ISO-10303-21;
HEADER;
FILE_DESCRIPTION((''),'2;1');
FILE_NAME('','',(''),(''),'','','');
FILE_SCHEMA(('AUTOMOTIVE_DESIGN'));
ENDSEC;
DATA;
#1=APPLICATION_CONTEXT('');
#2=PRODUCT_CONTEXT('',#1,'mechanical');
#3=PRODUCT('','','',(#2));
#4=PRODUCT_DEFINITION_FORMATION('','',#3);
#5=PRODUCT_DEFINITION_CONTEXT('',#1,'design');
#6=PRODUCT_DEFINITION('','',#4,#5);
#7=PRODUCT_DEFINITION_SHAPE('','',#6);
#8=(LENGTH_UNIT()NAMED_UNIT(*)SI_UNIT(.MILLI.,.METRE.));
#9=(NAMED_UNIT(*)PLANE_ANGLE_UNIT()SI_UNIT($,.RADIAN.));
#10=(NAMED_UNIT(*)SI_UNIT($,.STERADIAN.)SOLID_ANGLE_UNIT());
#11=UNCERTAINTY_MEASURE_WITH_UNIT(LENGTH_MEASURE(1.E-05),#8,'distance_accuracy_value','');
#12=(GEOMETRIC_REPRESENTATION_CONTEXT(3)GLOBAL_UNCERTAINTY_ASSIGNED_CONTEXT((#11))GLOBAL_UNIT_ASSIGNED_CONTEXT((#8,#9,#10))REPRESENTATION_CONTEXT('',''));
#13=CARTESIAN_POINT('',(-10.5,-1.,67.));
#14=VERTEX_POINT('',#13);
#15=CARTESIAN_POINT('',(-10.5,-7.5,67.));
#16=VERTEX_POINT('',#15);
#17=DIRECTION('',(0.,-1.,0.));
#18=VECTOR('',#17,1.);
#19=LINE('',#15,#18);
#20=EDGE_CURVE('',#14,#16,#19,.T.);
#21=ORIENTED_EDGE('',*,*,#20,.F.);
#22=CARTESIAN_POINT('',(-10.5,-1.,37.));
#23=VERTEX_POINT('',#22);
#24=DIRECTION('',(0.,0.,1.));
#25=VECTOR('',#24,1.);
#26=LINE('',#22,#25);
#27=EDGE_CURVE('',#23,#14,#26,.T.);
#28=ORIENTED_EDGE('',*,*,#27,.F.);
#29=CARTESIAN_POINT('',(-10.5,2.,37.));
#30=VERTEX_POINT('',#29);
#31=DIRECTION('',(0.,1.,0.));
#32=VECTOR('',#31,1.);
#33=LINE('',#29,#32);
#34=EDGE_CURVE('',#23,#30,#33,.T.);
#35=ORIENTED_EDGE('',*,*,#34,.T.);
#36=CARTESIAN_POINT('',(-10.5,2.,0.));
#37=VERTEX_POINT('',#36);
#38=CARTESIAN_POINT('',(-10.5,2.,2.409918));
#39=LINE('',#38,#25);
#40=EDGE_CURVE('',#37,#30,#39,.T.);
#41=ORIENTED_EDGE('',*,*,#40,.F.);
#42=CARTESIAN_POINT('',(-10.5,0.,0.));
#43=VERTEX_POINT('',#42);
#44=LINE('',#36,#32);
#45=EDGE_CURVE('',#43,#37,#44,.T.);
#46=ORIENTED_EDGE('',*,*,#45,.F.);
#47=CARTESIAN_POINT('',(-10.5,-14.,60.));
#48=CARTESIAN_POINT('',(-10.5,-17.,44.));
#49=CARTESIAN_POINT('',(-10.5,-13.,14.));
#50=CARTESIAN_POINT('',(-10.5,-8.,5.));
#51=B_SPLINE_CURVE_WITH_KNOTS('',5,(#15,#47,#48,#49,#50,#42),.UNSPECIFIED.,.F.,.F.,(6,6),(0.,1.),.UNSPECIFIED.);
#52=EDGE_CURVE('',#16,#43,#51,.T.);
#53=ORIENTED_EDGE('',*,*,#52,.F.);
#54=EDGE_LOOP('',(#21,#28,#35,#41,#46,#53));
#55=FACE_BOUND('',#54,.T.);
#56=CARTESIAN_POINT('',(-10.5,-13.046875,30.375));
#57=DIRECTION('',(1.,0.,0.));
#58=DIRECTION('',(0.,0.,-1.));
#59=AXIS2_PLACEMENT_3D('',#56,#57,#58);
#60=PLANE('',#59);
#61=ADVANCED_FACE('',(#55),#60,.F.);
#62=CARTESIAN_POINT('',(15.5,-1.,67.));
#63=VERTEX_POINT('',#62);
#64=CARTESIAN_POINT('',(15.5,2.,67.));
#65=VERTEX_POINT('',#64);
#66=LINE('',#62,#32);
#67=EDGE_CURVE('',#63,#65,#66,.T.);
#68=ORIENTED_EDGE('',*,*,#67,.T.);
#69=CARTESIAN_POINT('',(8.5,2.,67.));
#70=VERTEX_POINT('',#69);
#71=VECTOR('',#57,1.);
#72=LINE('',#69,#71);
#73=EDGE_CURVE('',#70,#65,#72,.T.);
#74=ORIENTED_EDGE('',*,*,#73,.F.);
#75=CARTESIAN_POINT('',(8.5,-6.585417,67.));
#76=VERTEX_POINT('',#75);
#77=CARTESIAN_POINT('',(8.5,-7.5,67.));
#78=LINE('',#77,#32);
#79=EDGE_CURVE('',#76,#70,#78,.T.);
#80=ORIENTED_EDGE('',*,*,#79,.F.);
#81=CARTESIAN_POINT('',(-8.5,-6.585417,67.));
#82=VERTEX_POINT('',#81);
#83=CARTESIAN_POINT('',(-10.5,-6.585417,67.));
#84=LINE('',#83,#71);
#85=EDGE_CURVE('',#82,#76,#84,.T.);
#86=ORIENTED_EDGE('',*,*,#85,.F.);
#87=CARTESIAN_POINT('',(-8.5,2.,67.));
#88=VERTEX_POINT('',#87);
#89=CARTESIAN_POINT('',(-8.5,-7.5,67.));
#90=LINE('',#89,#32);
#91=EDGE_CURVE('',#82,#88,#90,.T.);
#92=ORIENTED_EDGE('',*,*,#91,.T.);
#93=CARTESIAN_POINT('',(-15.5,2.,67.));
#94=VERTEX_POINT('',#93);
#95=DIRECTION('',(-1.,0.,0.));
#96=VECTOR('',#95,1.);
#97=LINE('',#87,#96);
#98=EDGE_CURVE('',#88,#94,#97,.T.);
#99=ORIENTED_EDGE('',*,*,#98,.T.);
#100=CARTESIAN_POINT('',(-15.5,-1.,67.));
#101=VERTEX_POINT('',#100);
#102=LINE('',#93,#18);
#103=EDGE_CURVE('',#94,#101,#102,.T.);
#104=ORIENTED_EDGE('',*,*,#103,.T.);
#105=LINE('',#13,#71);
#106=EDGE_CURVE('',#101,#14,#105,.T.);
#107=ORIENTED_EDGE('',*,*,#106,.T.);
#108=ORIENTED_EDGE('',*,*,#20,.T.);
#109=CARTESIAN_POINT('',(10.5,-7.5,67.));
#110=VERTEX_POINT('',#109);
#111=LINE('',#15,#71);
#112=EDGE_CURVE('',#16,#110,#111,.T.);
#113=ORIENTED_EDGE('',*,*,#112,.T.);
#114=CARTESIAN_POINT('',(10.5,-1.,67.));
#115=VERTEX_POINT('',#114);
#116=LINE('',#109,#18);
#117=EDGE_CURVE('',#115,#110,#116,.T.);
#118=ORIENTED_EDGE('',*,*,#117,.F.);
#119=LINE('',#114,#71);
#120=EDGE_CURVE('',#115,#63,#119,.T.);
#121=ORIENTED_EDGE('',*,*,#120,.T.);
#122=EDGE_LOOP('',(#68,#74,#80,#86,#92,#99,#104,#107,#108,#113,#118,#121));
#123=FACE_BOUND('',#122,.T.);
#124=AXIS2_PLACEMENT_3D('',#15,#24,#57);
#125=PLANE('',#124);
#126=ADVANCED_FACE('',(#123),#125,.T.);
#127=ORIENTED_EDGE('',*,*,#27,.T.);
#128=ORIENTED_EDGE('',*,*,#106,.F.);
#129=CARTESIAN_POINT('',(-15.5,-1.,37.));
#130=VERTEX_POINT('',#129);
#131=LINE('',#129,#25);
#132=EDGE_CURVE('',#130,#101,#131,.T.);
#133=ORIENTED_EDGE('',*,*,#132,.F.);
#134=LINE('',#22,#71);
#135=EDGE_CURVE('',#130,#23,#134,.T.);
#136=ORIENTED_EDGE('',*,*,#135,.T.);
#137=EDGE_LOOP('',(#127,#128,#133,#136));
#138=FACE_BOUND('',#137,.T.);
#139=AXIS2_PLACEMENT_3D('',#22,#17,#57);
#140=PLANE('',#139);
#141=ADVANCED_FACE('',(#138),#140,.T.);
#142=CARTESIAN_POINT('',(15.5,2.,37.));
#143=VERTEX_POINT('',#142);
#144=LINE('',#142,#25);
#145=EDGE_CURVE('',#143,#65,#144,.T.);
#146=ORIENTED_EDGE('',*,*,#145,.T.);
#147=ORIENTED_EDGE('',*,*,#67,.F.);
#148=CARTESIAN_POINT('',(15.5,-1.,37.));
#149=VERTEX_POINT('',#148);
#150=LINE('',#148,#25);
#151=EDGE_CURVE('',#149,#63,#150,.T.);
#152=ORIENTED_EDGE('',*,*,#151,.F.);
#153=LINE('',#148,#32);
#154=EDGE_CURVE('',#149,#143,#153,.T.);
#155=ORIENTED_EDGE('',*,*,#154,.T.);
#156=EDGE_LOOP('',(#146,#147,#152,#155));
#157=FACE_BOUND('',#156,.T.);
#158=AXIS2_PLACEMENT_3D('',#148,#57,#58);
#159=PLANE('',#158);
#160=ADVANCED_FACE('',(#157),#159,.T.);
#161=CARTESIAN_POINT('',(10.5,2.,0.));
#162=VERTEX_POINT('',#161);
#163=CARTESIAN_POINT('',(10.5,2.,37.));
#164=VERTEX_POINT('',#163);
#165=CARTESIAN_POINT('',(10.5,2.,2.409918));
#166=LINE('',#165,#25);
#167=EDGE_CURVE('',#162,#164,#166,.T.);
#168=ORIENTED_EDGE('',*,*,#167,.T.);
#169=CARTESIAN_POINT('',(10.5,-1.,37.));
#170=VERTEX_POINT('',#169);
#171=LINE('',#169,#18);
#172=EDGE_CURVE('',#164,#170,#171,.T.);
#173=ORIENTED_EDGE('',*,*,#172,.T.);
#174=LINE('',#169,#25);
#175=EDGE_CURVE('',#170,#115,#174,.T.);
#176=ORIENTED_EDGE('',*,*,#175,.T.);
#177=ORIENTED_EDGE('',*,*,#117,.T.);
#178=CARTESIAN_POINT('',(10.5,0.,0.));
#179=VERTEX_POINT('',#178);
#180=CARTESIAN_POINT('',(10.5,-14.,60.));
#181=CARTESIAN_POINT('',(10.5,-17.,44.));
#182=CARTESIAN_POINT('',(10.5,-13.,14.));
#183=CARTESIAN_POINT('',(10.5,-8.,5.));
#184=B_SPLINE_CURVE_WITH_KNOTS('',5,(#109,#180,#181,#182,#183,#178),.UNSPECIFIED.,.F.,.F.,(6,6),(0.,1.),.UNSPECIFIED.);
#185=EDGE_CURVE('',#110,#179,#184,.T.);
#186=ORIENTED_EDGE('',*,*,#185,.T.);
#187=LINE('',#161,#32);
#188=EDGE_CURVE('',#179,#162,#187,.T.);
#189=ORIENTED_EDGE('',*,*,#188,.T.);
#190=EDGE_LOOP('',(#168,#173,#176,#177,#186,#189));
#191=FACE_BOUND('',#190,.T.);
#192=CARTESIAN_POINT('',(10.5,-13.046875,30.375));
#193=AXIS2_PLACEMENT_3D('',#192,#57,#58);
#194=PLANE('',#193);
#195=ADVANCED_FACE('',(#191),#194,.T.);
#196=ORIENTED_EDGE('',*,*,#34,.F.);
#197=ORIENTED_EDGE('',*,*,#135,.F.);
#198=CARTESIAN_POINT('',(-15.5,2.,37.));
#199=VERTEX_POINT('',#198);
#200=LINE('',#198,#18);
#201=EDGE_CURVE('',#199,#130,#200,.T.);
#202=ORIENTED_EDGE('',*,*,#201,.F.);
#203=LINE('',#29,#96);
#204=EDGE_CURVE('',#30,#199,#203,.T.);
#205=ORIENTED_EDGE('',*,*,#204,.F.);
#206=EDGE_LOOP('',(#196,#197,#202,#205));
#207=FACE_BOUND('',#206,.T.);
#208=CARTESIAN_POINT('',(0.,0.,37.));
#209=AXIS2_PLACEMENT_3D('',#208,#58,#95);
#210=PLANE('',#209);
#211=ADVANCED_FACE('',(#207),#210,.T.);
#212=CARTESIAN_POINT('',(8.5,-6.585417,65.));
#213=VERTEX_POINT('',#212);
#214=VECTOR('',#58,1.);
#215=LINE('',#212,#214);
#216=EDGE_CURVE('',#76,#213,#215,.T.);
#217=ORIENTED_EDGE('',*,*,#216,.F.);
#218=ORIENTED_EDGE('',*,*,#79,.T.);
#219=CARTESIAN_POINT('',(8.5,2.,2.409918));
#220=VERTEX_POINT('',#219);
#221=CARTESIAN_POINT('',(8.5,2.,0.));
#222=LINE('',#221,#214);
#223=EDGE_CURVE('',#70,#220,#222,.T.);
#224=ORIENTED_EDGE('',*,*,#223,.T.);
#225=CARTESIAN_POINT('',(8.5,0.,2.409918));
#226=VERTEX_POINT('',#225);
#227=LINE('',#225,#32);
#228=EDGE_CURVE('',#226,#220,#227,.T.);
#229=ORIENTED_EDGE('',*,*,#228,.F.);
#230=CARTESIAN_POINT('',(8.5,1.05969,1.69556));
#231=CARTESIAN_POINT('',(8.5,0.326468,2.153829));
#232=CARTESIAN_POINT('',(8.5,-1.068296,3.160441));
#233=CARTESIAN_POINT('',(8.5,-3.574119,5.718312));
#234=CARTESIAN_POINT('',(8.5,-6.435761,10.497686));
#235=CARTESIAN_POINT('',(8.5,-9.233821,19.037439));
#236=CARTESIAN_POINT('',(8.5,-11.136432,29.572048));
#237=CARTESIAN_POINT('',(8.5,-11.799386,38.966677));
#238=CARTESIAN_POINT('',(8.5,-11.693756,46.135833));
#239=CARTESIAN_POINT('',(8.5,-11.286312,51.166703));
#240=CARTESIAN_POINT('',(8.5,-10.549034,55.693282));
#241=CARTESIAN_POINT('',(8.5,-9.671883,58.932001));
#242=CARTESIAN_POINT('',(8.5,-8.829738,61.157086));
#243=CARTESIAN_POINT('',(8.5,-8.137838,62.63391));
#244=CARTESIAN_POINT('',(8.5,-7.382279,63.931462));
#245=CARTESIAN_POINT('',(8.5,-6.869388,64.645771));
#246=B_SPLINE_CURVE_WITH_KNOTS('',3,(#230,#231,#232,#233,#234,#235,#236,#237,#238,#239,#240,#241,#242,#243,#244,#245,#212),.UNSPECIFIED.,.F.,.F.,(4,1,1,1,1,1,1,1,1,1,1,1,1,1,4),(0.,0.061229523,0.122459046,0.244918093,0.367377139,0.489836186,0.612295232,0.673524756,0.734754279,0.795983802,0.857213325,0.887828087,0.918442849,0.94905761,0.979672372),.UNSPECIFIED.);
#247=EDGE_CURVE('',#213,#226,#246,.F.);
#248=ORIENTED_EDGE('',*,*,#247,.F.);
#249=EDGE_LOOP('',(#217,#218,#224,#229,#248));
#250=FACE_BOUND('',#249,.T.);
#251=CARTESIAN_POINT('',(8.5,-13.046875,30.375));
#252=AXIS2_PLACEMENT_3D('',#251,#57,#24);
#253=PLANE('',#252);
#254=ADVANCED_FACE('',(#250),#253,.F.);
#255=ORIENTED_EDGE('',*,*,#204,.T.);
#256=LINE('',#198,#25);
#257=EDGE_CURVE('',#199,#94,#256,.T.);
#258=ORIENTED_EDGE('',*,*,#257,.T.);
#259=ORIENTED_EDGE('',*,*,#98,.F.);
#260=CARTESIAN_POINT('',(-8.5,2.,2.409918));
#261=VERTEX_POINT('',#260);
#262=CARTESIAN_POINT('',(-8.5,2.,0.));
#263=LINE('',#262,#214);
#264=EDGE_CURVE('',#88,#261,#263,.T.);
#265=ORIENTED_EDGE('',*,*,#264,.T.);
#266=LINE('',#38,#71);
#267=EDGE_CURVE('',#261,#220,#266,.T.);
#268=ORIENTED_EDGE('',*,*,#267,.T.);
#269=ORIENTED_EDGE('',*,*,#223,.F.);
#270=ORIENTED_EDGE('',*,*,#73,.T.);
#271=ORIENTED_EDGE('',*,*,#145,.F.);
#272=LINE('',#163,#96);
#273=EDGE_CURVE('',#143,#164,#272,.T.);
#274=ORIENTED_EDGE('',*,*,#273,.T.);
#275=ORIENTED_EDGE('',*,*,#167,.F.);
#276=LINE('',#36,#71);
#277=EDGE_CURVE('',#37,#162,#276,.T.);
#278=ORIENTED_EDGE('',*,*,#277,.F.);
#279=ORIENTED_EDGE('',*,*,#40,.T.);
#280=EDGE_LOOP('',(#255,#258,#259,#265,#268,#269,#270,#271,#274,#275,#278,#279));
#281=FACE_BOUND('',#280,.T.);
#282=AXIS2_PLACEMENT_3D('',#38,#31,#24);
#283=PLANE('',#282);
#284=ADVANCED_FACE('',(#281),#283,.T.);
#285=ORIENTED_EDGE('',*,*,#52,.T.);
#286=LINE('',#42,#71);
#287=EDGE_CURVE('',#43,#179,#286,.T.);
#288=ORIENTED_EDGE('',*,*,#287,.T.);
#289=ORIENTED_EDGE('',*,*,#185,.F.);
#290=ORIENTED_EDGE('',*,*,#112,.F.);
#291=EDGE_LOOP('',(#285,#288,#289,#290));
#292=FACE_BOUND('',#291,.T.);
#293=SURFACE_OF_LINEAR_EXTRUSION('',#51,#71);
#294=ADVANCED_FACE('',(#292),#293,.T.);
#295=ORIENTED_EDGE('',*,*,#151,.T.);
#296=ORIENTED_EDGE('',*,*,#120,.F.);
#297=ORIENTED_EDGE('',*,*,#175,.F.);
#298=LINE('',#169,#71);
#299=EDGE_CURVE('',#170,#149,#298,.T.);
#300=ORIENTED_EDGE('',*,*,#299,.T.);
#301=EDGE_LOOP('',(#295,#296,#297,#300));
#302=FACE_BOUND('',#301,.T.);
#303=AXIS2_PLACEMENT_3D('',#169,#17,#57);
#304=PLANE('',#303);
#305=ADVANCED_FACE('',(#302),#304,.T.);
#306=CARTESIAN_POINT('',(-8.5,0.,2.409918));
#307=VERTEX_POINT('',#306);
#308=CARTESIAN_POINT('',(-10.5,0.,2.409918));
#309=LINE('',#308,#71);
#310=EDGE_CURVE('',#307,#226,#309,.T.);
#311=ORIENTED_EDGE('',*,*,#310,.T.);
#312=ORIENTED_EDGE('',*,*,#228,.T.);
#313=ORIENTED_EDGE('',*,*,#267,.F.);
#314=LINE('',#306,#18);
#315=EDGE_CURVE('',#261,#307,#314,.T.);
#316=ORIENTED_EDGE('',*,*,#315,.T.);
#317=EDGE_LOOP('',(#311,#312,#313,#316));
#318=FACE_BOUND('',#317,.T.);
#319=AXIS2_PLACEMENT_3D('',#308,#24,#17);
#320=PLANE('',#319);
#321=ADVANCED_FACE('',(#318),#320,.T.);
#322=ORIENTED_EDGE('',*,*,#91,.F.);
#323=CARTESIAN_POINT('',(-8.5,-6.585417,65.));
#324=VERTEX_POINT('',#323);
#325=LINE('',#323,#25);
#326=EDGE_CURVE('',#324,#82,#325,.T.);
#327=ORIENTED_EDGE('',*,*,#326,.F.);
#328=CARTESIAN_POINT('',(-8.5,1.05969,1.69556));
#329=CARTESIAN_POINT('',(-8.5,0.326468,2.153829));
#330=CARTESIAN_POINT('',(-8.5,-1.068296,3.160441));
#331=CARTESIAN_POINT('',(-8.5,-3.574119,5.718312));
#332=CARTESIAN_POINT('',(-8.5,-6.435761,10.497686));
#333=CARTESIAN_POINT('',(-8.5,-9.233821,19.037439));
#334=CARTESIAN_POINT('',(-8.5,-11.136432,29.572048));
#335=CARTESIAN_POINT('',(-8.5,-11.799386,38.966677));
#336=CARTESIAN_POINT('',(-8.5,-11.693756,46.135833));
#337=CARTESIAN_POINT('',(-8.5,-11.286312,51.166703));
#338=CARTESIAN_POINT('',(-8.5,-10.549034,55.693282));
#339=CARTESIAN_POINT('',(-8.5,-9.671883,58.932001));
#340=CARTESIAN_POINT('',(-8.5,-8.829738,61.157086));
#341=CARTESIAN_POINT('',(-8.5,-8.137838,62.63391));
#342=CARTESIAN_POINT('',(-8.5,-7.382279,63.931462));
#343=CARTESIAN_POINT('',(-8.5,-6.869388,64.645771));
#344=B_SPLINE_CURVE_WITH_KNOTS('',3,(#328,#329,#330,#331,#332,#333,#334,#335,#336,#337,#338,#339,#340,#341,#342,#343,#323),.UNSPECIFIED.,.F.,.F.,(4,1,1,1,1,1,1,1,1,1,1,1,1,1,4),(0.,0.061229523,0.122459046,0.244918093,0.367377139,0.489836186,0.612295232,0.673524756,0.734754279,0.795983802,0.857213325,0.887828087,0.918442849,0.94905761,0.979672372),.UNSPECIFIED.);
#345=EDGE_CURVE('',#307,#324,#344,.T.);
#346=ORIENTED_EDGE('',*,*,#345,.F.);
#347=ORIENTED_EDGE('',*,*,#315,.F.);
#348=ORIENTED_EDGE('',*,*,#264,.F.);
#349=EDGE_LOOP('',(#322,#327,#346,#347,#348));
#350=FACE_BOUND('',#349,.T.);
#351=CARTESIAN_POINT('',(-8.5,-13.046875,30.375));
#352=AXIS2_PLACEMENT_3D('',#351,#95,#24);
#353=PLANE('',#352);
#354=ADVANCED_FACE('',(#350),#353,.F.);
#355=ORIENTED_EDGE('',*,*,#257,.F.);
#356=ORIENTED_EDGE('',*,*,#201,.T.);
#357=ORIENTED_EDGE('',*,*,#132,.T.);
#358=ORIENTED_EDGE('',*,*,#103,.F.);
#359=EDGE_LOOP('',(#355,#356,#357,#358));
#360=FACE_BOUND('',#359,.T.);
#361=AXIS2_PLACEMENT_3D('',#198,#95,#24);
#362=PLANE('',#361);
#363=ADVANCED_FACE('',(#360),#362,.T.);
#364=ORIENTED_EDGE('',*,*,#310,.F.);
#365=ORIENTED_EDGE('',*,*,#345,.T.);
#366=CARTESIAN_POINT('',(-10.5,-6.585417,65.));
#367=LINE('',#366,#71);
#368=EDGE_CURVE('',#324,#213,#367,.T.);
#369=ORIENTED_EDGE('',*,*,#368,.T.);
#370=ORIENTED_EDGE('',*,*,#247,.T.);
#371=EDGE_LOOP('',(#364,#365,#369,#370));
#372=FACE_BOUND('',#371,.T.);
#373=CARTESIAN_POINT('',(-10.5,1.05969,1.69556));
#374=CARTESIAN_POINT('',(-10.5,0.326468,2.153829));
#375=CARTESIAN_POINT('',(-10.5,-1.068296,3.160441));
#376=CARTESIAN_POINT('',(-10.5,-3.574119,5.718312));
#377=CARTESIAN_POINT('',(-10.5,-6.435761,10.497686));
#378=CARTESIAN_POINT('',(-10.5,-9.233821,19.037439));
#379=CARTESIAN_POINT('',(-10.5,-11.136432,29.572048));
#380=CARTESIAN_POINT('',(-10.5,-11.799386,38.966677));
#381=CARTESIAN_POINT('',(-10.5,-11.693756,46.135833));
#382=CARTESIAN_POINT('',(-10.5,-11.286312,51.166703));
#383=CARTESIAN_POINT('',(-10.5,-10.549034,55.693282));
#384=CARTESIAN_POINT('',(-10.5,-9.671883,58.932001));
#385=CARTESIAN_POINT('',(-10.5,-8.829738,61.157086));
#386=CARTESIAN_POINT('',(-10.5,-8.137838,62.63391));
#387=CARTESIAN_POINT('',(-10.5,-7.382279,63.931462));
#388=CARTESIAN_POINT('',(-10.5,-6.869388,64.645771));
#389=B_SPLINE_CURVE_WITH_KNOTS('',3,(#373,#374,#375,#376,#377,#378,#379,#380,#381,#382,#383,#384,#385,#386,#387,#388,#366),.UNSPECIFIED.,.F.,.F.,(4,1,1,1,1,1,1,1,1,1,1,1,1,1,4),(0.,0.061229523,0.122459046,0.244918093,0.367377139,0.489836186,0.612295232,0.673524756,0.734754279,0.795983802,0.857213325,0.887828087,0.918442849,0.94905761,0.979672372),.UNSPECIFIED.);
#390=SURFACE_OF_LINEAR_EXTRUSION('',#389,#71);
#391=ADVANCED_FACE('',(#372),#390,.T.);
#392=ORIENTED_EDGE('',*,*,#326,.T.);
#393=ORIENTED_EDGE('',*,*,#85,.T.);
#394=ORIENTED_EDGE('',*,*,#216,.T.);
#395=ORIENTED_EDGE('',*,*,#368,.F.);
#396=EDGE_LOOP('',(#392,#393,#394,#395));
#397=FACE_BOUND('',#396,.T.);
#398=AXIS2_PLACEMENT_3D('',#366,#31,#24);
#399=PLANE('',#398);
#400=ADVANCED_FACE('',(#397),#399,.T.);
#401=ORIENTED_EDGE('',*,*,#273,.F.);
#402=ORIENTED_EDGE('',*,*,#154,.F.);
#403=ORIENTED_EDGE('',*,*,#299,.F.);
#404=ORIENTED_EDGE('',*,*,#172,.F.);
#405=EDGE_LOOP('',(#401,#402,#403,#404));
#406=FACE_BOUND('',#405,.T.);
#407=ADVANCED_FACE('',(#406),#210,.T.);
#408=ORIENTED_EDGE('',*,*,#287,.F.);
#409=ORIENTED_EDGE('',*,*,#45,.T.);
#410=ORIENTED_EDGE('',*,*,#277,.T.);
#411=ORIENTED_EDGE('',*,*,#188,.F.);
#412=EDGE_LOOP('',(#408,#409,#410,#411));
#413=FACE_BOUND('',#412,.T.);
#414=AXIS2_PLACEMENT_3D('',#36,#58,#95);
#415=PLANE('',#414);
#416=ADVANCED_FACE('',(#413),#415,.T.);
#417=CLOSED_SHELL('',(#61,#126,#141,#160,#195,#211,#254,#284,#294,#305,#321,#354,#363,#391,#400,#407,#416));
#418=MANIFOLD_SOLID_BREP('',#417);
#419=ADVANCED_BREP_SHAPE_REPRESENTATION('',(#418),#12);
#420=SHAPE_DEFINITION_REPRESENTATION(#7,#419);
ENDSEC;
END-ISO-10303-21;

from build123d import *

# Parameters (mm, degrees)
BASEPIEDEAPPOGGIO_START = -10.5
BASEPIEDEAPPOGGIO_DEPTH = 21
LATOSINISTRO_DEPTH      = 2
SCHIZZO3_W              = 5
SCHIZZO3_H              = 3
ALETTEAGGANCIO_DEPTH    = 30


# Read off the part's stored shape, not the designer's step: BasePiedeAppoggio
with BuildPart() as part:
    # BasePiedeAppoggio outline → BasePiedeAppoggio (new body)
    with BuildSketch(Plane(origin=(0, 0, 0), x_dir=(0, 0, -1), z_dir=(1, 0, 0)).offset(BASEPIEDEAPPOGGIO_START)):
        with BuildLine():
            Line((-67, -6.58541733), (-67, -7.5))
            add(Edge.make_bspline(
                [(-67, -7.5), (-60, -14), (-44, -17), (-14, -13), (-5, -8), (0, 0)],
                knots=[0, 0, 0, 0, 0, 0, 1, 1, 1, 1, 1, 1], degree=5))
            Line((0, 0), (0, 2))
            Line((0, 2), (-2.409917527, 2))
            Line((-2.409917527, 2), (-2.409917527, 0))
            add(Edge.make_bspline(
                [(-2.409917527, 0), (-2.667324323, -0.353402954), (-3.476108464, -1.377540434), (-5.718312008, -3.574118885), (-10.497685703, -6.435761001), (-19.037438877, -9.233820798), (-29.572047533, -11.136431528), (-38.966676556, -11.799385995), (-46.135832891, -11.693755764), (-51.166703498, -11.28631183), (-55.693282116, -10.549034431), (-58.932001396, -9.671882802), (-61.157085706, -8.829738395), (-62.633910182, -8.137838289), (-63.931461685, -7.382278902), (-64.645771008, -6.869387628), (-65, -6.58541733)],
                knots=[0.030225408, 0.030225408, 0.030225408, 0.030225408, 0.061229523, 0.122459046, 0.244918093, 0.367377139, 0.489836186, 0.612295232, 0.673524756, 0.734754279, 0.795983802, 0.857213325, 0.887828087, 0.918442849, 0.94905761, 0.979672372, 0.979672372, 0.979672372, 0.979672372], degree=3))
            Line((-65, -6.58541733), (-67, -6.58541733))
        make_face()
    extrude(amount=BASEPIEDEAPPOGGIO_DEPTH)

    # Schizzo2 → LatoSinistro (add)
    with BuildSketch(Plane.ZY.offset(10.5)):
        with BuildLine():
            Line((67, -7.5), (67, 2))
            Line((67, 2), (0, 2))
            Line((0, 2), (0, 0))
            add(Edge.make_bspline(
                [(67, -7.5), (60, -14), (44, -17), (14, -13), (5, -8), (0, 0)],
                knots=[0, 0, 0, 0, 0, 0, 1, 1, 1, 1, 1, 1], degree=5))
        make_face()
    latosinistro = extrude(amount=-LATOSINISTRO_DEPTH)

    # LatoDestro: LatoSinistro across plane
    add(latosinistro.mirror(Plane(origin=(0, 0, 0), x_dir=(0, 0, 1), z_dir=(1, 0, 0))))

    # Schizzo3 → AletteAggancio (add)
    with BuildSketch(Plane.XY.offset(67)):
        with Locations((-13, 0.5)):
            Rectangle(SCHIZZO3_W, SCHIZZO3_H)
        with Locations((13, 0.5)):
            Rectangle(SCHIZZO3_W, SCHIZZO3_H)
    extrude(amount=-ALETTEAGGANCIO_DEPTH)


solid = part.part
